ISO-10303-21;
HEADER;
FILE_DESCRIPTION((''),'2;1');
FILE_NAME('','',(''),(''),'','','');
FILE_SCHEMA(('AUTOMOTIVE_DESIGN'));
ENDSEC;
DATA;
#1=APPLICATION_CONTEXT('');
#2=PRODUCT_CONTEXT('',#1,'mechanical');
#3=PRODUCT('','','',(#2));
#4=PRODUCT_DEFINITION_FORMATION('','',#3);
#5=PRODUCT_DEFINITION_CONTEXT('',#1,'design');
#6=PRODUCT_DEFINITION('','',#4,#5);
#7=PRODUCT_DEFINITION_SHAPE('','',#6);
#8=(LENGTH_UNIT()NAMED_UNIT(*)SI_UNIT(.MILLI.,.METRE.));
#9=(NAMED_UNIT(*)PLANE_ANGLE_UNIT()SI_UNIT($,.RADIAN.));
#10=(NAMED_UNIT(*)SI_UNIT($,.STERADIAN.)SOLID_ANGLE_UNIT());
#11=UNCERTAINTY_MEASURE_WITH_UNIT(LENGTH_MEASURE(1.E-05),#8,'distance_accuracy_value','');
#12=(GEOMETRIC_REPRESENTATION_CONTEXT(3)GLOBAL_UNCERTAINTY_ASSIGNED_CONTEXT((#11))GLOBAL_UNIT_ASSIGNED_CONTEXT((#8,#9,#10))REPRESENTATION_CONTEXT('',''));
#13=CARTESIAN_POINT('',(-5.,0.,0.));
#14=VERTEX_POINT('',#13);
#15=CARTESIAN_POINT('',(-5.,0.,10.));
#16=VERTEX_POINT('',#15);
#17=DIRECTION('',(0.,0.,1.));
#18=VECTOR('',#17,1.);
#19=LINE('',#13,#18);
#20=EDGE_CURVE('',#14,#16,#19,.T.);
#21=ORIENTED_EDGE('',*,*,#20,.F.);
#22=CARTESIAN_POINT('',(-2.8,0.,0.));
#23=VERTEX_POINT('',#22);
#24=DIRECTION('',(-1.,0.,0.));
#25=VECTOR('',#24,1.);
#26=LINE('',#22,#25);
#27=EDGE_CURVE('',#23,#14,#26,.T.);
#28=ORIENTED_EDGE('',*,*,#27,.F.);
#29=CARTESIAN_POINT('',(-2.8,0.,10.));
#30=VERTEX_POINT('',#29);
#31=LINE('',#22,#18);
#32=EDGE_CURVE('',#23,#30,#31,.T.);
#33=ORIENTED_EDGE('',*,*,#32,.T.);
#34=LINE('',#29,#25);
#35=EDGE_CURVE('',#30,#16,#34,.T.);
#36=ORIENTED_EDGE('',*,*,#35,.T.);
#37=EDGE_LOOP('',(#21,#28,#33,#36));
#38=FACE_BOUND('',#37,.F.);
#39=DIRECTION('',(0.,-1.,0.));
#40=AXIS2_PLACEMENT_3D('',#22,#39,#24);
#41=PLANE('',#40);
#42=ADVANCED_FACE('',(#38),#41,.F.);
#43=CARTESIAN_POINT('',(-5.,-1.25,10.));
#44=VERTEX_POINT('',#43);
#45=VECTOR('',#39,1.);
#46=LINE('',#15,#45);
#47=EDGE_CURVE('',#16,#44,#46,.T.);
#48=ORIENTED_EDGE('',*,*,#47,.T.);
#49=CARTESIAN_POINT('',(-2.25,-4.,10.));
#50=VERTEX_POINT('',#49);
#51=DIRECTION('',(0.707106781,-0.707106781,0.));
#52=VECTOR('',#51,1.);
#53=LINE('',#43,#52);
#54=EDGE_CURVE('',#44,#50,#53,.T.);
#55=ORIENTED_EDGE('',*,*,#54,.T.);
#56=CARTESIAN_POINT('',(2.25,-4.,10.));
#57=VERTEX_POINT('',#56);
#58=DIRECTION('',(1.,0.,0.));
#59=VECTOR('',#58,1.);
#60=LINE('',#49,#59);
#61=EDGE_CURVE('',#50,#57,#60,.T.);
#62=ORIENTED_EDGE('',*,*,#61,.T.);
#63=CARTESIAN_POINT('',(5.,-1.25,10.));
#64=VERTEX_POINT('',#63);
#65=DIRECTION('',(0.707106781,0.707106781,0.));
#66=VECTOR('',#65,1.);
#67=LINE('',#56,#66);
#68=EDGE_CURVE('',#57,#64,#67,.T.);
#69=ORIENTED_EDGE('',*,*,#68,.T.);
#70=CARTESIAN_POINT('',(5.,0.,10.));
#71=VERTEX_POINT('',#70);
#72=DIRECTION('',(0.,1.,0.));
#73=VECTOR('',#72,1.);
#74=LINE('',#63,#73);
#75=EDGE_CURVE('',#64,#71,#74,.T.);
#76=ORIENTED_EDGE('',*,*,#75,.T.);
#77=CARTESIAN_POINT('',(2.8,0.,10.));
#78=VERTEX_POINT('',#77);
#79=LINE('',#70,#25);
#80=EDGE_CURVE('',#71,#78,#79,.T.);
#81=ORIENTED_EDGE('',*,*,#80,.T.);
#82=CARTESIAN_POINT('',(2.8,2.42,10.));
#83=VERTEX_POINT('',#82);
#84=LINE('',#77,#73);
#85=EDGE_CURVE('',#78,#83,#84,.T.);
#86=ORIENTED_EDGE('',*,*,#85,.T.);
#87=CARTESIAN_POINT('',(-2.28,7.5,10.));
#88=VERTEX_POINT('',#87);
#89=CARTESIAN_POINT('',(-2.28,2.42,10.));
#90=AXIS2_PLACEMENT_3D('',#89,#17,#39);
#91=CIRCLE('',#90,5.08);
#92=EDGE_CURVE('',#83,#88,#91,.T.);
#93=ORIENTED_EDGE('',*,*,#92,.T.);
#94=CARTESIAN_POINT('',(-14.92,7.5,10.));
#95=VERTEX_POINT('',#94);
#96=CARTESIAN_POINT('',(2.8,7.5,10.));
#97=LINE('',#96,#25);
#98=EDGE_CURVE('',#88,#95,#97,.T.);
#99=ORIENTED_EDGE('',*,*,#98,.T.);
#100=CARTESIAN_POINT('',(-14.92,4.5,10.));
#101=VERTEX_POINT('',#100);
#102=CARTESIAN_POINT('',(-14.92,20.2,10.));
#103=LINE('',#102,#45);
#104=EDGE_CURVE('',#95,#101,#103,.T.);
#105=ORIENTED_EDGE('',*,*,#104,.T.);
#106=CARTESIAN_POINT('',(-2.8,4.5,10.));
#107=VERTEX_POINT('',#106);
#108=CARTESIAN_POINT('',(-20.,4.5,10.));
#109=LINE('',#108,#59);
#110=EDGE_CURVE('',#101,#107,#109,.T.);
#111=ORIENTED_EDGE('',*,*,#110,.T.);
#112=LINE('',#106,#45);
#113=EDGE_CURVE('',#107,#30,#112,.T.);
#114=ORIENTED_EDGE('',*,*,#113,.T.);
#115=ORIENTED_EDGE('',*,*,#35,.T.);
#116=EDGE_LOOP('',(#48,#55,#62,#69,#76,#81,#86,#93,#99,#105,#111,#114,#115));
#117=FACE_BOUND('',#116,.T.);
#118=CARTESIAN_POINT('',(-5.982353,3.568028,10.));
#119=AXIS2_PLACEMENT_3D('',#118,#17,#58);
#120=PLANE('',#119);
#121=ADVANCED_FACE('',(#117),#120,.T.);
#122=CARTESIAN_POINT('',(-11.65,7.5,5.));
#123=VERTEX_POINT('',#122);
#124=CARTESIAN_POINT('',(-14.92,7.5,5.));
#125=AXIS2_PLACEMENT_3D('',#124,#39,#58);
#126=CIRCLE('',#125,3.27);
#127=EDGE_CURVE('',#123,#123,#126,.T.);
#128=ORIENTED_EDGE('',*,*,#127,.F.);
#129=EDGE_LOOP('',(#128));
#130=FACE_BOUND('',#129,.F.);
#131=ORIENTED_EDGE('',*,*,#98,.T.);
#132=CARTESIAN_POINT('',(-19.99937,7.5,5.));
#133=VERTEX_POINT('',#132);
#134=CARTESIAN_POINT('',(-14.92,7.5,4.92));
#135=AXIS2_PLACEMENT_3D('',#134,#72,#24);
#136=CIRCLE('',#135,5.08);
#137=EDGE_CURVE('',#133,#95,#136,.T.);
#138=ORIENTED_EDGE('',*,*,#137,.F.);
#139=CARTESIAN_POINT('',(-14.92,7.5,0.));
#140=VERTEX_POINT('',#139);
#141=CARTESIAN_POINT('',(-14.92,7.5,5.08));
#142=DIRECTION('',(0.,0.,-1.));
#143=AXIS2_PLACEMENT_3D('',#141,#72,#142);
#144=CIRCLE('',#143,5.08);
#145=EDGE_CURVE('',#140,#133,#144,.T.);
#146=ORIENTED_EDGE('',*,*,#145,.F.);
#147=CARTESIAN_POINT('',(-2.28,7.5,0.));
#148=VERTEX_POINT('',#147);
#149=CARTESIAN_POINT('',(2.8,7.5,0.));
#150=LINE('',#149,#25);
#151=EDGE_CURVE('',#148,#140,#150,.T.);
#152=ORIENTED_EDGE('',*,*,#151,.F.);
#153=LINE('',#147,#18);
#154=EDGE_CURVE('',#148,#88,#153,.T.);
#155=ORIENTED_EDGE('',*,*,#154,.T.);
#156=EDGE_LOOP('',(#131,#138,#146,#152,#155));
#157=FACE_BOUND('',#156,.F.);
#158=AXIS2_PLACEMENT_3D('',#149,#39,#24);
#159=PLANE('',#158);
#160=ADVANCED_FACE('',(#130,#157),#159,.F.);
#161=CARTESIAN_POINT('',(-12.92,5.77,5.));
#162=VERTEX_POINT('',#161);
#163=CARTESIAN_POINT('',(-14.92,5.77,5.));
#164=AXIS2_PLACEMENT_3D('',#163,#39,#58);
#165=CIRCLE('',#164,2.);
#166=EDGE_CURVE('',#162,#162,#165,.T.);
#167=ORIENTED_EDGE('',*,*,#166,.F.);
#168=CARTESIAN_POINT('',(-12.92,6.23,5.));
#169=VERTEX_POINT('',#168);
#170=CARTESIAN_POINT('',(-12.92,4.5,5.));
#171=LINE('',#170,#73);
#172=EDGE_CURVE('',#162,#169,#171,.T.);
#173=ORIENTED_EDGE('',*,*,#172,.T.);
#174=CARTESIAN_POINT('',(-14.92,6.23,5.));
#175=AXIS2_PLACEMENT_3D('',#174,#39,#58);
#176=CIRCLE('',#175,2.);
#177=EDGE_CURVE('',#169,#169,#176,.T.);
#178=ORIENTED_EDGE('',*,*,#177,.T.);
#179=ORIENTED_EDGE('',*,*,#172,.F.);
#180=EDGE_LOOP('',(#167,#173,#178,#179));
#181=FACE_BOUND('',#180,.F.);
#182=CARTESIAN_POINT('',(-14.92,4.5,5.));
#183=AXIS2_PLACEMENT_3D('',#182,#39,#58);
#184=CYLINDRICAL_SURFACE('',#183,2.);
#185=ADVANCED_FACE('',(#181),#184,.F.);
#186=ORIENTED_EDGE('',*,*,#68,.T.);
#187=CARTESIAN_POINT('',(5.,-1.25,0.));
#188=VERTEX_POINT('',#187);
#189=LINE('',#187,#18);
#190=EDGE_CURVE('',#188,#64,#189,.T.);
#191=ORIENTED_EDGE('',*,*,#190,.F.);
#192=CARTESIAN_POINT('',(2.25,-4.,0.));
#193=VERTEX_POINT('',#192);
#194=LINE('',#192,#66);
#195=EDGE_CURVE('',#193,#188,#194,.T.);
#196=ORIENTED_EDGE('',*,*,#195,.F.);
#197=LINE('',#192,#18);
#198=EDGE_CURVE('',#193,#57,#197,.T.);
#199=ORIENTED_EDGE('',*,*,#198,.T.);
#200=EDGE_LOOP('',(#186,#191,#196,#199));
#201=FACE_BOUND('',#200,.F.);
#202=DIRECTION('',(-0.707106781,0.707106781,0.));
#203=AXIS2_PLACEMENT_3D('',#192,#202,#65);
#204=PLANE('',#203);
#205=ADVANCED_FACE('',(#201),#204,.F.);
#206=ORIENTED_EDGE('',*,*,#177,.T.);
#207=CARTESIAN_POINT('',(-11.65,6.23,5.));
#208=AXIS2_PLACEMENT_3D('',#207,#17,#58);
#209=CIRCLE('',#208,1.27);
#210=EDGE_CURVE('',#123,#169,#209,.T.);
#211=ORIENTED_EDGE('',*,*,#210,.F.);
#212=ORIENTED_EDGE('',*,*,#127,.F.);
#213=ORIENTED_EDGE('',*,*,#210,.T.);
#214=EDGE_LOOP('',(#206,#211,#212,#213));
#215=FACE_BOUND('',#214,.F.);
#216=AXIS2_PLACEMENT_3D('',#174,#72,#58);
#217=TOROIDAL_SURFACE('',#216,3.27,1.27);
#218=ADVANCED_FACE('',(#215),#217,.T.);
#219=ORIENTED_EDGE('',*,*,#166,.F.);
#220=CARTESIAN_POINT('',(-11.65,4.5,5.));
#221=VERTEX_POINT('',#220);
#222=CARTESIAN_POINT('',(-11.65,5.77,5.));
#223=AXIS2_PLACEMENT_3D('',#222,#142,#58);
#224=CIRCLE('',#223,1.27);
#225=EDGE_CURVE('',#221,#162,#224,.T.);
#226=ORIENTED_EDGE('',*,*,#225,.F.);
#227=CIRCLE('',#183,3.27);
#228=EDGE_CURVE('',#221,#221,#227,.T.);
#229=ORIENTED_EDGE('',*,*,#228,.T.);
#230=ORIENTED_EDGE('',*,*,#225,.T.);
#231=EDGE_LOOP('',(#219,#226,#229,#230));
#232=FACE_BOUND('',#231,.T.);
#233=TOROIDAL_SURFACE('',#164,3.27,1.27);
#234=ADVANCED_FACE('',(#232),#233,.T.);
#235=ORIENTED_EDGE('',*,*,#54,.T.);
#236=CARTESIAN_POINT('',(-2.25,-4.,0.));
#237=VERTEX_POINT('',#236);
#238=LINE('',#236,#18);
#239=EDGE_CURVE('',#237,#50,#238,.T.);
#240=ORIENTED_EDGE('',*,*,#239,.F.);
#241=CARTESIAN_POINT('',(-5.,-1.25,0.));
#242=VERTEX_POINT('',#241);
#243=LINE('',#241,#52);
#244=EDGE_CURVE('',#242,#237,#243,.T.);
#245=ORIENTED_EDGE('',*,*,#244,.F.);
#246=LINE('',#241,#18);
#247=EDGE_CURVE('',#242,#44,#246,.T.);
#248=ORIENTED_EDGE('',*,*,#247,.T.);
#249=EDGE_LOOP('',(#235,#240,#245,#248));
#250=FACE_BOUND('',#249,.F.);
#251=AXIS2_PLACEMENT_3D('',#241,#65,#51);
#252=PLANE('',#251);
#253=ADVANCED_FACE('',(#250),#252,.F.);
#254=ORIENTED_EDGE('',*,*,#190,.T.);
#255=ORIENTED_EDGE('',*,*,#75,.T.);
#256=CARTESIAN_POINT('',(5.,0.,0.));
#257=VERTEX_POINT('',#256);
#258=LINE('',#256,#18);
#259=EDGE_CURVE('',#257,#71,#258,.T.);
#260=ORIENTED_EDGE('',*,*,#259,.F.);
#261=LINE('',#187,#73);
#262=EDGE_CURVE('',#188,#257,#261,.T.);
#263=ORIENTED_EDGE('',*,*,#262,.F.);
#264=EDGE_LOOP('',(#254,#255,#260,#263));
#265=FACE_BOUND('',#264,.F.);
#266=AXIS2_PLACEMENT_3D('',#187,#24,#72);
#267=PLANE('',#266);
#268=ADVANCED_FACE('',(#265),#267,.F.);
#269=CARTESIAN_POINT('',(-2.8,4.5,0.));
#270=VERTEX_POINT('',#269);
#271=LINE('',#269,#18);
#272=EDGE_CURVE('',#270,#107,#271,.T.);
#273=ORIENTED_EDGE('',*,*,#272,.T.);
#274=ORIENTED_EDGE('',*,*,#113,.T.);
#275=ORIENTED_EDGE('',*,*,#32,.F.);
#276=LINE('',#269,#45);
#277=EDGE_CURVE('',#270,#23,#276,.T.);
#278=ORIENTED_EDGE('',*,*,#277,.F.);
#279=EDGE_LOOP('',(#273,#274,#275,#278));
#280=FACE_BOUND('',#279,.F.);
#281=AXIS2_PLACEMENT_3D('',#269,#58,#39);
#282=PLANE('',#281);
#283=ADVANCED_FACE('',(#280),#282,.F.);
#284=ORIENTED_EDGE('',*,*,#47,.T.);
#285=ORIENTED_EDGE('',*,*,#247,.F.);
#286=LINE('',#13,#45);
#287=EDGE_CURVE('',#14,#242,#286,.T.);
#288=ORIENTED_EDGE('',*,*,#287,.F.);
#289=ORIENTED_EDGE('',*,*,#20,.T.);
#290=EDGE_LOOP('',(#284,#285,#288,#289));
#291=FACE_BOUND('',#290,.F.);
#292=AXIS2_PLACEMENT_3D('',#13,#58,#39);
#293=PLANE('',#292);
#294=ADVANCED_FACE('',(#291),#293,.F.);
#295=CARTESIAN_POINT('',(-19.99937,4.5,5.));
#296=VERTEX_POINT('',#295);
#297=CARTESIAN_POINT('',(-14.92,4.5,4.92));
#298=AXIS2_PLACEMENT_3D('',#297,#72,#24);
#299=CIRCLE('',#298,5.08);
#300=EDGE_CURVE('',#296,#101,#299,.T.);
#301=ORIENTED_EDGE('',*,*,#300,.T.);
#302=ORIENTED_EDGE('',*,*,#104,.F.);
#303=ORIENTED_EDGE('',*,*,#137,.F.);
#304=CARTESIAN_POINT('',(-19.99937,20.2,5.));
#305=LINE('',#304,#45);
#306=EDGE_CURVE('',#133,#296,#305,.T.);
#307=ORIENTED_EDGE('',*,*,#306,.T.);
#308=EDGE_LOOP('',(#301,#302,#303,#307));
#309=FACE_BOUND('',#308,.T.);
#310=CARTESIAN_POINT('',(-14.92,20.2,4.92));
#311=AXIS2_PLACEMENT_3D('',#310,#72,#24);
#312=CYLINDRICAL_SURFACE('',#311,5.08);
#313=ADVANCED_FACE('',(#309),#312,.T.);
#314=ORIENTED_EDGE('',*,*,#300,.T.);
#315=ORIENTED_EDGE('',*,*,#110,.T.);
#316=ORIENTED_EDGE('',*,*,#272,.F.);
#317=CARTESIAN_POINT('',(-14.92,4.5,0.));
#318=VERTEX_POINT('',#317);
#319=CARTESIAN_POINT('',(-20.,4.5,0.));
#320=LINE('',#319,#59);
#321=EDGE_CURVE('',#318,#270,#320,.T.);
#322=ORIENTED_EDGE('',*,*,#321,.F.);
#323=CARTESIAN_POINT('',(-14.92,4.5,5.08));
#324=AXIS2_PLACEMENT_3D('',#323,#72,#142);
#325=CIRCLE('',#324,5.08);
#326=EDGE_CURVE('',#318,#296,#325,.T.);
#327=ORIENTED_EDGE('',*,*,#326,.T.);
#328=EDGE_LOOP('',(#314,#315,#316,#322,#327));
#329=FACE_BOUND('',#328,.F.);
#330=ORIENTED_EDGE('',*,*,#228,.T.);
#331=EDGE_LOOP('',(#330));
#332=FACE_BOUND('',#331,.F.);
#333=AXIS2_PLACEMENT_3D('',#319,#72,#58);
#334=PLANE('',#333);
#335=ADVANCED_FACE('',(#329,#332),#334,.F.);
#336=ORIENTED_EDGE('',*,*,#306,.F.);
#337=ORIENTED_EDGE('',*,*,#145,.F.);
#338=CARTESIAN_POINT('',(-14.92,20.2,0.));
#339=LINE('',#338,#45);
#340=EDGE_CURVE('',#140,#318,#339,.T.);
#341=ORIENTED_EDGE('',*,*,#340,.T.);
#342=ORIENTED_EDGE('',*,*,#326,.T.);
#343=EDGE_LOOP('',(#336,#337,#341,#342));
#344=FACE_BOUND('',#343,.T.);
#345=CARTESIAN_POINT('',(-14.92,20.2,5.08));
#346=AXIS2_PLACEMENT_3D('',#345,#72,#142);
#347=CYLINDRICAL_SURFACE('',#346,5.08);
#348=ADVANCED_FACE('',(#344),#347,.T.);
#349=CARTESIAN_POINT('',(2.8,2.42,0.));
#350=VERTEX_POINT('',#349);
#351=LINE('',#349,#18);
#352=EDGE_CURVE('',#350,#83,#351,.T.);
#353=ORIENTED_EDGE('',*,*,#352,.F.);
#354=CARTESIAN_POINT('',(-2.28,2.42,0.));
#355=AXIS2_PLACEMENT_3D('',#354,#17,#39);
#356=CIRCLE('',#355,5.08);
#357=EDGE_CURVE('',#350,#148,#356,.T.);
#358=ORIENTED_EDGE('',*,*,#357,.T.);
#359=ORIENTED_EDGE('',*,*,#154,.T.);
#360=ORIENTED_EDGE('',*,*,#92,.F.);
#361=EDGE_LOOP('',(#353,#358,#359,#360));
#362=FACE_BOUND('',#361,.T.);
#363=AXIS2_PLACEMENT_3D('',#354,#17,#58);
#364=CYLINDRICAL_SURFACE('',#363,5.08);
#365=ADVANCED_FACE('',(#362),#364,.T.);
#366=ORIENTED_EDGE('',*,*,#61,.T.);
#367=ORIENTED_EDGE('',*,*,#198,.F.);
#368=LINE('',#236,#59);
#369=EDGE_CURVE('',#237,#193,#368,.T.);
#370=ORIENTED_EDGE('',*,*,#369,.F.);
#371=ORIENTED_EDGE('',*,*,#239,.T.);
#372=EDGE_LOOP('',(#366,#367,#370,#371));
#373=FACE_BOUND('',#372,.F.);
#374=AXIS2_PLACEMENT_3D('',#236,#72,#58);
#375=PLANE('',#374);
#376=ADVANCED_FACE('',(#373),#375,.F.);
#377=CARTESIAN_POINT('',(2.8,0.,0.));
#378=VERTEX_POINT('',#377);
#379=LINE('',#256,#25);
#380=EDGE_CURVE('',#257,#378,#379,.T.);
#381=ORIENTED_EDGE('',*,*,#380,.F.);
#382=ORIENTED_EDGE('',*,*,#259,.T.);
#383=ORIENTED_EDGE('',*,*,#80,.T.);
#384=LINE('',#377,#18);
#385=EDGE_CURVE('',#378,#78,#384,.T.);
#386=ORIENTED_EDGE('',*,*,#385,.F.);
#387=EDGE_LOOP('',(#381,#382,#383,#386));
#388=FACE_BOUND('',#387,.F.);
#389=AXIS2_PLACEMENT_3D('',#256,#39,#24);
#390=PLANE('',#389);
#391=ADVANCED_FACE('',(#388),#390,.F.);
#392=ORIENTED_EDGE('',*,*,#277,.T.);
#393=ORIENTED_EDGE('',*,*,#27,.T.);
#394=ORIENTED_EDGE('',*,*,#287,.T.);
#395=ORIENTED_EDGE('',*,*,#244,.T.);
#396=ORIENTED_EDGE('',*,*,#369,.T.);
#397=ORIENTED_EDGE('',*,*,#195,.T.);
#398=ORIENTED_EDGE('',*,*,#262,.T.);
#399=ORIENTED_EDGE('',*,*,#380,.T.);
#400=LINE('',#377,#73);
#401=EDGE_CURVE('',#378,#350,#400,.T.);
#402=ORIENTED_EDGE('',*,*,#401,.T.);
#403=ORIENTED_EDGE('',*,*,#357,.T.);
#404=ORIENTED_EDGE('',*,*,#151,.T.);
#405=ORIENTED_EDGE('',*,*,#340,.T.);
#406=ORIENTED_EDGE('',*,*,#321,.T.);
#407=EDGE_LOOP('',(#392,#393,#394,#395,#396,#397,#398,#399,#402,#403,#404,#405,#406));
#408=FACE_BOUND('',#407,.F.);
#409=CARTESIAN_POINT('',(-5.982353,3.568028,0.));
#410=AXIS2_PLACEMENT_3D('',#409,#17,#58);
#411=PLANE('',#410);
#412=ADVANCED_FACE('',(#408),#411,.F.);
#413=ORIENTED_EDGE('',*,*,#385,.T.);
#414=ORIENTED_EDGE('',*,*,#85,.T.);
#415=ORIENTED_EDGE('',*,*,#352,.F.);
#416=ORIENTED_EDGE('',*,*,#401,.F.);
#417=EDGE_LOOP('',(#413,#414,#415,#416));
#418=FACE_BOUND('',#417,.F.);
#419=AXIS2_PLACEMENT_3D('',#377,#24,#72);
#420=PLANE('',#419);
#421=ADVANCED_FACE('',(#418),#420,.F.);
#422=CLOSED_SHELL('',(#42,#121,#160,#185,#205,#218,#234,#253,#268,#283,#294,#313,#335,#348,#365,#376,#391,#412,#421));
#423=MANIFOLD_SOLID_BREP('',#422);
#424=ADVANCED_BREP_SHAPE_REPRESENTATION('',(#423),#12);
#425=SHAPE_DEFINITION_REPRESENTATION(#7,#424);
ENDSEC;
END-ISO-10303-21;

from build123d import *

# Parameters (mm, degrees)
F1_DEPTH    = 10
F2_R        = 5.08
F3_T1_DEPTH = 28.4
F4_R        = 2
F5_DEPTH    = 25.4
F6_R        = 1.27


# Not quite as in the source:
# - a fillet or chamfer that OpenCascade refuses, or shapes differently, is made with other operations: its cross-section is extruded or revolved along the edge and cut away or added


with BuildPart() as f1:
    # F0 (on Top) → F1 (new body)
    with BuildSketch(Plane.XY):
        Polygon((-2.25, -4), (0, -4), (2.25, -4), (5, -1.25), (5, 0), (2.8, 0), (2.8, 4), (2.8, 7.5), (-20, 7.5), (-20, 4.5), (-2.8, 4.5), (-2.8, 4), (-2.8, 0), (-5, 0), (-5, -1.25), align=None)
    extrude(amount=F1_DEPTH)

    # F2
    f2_edges = [f1.edges().sort_by_distance(p)[0] for p in [
        (2.8, 7.5, 5),
    ]]
    fillet(f2_edges, radius=F2_R)

    # F3: fillet of radius 5.08 on 2 edges, made by hand

    # F3_s2 → F3_t1 (cut)
    with BuildSketch(Plane.XZ.offset(-20.2)):
        with BuildLine():
            ThreePointArc((-20, 4.92), (-18.5121024484, 8.5121024484), (-14.92, 10))
            Line((-14.92, 10), (-20, 10))
            Line((-20, 10), (-20, 4.92))
        make_face()
        with BuildLine():
            ThreePointArc((-14.92, 0), (-18.5121024484, 1.4878975516), (-20, 5.08))
            Line((-20, 5.08), (-20, 0))
            Line((-20, 0), (-14.92, 0))
        make_face()
    extrude(amount=F3_T1_DEPTH, mode=Mode.SUBTRACT)

    # F4 (on face) → F5 (cut)
    with BuildSketch(Plane.XZ.offset(-4.5)):
        with Locations((-14.92, 5)):
            Circle(F4_R)
    extrude(amount=-F5_DEPTH, mode=Mode.SUBTRACT)

    # F6
    f6_edges = [f1.edges().sort_by_distance(p)[0] for p in [
        (-16.92, 4.5, 5),
        (-16.92, 7.5, 5),
    ]]
    fillet(f6_edges, radius=F6_R)


solid = f1.part
